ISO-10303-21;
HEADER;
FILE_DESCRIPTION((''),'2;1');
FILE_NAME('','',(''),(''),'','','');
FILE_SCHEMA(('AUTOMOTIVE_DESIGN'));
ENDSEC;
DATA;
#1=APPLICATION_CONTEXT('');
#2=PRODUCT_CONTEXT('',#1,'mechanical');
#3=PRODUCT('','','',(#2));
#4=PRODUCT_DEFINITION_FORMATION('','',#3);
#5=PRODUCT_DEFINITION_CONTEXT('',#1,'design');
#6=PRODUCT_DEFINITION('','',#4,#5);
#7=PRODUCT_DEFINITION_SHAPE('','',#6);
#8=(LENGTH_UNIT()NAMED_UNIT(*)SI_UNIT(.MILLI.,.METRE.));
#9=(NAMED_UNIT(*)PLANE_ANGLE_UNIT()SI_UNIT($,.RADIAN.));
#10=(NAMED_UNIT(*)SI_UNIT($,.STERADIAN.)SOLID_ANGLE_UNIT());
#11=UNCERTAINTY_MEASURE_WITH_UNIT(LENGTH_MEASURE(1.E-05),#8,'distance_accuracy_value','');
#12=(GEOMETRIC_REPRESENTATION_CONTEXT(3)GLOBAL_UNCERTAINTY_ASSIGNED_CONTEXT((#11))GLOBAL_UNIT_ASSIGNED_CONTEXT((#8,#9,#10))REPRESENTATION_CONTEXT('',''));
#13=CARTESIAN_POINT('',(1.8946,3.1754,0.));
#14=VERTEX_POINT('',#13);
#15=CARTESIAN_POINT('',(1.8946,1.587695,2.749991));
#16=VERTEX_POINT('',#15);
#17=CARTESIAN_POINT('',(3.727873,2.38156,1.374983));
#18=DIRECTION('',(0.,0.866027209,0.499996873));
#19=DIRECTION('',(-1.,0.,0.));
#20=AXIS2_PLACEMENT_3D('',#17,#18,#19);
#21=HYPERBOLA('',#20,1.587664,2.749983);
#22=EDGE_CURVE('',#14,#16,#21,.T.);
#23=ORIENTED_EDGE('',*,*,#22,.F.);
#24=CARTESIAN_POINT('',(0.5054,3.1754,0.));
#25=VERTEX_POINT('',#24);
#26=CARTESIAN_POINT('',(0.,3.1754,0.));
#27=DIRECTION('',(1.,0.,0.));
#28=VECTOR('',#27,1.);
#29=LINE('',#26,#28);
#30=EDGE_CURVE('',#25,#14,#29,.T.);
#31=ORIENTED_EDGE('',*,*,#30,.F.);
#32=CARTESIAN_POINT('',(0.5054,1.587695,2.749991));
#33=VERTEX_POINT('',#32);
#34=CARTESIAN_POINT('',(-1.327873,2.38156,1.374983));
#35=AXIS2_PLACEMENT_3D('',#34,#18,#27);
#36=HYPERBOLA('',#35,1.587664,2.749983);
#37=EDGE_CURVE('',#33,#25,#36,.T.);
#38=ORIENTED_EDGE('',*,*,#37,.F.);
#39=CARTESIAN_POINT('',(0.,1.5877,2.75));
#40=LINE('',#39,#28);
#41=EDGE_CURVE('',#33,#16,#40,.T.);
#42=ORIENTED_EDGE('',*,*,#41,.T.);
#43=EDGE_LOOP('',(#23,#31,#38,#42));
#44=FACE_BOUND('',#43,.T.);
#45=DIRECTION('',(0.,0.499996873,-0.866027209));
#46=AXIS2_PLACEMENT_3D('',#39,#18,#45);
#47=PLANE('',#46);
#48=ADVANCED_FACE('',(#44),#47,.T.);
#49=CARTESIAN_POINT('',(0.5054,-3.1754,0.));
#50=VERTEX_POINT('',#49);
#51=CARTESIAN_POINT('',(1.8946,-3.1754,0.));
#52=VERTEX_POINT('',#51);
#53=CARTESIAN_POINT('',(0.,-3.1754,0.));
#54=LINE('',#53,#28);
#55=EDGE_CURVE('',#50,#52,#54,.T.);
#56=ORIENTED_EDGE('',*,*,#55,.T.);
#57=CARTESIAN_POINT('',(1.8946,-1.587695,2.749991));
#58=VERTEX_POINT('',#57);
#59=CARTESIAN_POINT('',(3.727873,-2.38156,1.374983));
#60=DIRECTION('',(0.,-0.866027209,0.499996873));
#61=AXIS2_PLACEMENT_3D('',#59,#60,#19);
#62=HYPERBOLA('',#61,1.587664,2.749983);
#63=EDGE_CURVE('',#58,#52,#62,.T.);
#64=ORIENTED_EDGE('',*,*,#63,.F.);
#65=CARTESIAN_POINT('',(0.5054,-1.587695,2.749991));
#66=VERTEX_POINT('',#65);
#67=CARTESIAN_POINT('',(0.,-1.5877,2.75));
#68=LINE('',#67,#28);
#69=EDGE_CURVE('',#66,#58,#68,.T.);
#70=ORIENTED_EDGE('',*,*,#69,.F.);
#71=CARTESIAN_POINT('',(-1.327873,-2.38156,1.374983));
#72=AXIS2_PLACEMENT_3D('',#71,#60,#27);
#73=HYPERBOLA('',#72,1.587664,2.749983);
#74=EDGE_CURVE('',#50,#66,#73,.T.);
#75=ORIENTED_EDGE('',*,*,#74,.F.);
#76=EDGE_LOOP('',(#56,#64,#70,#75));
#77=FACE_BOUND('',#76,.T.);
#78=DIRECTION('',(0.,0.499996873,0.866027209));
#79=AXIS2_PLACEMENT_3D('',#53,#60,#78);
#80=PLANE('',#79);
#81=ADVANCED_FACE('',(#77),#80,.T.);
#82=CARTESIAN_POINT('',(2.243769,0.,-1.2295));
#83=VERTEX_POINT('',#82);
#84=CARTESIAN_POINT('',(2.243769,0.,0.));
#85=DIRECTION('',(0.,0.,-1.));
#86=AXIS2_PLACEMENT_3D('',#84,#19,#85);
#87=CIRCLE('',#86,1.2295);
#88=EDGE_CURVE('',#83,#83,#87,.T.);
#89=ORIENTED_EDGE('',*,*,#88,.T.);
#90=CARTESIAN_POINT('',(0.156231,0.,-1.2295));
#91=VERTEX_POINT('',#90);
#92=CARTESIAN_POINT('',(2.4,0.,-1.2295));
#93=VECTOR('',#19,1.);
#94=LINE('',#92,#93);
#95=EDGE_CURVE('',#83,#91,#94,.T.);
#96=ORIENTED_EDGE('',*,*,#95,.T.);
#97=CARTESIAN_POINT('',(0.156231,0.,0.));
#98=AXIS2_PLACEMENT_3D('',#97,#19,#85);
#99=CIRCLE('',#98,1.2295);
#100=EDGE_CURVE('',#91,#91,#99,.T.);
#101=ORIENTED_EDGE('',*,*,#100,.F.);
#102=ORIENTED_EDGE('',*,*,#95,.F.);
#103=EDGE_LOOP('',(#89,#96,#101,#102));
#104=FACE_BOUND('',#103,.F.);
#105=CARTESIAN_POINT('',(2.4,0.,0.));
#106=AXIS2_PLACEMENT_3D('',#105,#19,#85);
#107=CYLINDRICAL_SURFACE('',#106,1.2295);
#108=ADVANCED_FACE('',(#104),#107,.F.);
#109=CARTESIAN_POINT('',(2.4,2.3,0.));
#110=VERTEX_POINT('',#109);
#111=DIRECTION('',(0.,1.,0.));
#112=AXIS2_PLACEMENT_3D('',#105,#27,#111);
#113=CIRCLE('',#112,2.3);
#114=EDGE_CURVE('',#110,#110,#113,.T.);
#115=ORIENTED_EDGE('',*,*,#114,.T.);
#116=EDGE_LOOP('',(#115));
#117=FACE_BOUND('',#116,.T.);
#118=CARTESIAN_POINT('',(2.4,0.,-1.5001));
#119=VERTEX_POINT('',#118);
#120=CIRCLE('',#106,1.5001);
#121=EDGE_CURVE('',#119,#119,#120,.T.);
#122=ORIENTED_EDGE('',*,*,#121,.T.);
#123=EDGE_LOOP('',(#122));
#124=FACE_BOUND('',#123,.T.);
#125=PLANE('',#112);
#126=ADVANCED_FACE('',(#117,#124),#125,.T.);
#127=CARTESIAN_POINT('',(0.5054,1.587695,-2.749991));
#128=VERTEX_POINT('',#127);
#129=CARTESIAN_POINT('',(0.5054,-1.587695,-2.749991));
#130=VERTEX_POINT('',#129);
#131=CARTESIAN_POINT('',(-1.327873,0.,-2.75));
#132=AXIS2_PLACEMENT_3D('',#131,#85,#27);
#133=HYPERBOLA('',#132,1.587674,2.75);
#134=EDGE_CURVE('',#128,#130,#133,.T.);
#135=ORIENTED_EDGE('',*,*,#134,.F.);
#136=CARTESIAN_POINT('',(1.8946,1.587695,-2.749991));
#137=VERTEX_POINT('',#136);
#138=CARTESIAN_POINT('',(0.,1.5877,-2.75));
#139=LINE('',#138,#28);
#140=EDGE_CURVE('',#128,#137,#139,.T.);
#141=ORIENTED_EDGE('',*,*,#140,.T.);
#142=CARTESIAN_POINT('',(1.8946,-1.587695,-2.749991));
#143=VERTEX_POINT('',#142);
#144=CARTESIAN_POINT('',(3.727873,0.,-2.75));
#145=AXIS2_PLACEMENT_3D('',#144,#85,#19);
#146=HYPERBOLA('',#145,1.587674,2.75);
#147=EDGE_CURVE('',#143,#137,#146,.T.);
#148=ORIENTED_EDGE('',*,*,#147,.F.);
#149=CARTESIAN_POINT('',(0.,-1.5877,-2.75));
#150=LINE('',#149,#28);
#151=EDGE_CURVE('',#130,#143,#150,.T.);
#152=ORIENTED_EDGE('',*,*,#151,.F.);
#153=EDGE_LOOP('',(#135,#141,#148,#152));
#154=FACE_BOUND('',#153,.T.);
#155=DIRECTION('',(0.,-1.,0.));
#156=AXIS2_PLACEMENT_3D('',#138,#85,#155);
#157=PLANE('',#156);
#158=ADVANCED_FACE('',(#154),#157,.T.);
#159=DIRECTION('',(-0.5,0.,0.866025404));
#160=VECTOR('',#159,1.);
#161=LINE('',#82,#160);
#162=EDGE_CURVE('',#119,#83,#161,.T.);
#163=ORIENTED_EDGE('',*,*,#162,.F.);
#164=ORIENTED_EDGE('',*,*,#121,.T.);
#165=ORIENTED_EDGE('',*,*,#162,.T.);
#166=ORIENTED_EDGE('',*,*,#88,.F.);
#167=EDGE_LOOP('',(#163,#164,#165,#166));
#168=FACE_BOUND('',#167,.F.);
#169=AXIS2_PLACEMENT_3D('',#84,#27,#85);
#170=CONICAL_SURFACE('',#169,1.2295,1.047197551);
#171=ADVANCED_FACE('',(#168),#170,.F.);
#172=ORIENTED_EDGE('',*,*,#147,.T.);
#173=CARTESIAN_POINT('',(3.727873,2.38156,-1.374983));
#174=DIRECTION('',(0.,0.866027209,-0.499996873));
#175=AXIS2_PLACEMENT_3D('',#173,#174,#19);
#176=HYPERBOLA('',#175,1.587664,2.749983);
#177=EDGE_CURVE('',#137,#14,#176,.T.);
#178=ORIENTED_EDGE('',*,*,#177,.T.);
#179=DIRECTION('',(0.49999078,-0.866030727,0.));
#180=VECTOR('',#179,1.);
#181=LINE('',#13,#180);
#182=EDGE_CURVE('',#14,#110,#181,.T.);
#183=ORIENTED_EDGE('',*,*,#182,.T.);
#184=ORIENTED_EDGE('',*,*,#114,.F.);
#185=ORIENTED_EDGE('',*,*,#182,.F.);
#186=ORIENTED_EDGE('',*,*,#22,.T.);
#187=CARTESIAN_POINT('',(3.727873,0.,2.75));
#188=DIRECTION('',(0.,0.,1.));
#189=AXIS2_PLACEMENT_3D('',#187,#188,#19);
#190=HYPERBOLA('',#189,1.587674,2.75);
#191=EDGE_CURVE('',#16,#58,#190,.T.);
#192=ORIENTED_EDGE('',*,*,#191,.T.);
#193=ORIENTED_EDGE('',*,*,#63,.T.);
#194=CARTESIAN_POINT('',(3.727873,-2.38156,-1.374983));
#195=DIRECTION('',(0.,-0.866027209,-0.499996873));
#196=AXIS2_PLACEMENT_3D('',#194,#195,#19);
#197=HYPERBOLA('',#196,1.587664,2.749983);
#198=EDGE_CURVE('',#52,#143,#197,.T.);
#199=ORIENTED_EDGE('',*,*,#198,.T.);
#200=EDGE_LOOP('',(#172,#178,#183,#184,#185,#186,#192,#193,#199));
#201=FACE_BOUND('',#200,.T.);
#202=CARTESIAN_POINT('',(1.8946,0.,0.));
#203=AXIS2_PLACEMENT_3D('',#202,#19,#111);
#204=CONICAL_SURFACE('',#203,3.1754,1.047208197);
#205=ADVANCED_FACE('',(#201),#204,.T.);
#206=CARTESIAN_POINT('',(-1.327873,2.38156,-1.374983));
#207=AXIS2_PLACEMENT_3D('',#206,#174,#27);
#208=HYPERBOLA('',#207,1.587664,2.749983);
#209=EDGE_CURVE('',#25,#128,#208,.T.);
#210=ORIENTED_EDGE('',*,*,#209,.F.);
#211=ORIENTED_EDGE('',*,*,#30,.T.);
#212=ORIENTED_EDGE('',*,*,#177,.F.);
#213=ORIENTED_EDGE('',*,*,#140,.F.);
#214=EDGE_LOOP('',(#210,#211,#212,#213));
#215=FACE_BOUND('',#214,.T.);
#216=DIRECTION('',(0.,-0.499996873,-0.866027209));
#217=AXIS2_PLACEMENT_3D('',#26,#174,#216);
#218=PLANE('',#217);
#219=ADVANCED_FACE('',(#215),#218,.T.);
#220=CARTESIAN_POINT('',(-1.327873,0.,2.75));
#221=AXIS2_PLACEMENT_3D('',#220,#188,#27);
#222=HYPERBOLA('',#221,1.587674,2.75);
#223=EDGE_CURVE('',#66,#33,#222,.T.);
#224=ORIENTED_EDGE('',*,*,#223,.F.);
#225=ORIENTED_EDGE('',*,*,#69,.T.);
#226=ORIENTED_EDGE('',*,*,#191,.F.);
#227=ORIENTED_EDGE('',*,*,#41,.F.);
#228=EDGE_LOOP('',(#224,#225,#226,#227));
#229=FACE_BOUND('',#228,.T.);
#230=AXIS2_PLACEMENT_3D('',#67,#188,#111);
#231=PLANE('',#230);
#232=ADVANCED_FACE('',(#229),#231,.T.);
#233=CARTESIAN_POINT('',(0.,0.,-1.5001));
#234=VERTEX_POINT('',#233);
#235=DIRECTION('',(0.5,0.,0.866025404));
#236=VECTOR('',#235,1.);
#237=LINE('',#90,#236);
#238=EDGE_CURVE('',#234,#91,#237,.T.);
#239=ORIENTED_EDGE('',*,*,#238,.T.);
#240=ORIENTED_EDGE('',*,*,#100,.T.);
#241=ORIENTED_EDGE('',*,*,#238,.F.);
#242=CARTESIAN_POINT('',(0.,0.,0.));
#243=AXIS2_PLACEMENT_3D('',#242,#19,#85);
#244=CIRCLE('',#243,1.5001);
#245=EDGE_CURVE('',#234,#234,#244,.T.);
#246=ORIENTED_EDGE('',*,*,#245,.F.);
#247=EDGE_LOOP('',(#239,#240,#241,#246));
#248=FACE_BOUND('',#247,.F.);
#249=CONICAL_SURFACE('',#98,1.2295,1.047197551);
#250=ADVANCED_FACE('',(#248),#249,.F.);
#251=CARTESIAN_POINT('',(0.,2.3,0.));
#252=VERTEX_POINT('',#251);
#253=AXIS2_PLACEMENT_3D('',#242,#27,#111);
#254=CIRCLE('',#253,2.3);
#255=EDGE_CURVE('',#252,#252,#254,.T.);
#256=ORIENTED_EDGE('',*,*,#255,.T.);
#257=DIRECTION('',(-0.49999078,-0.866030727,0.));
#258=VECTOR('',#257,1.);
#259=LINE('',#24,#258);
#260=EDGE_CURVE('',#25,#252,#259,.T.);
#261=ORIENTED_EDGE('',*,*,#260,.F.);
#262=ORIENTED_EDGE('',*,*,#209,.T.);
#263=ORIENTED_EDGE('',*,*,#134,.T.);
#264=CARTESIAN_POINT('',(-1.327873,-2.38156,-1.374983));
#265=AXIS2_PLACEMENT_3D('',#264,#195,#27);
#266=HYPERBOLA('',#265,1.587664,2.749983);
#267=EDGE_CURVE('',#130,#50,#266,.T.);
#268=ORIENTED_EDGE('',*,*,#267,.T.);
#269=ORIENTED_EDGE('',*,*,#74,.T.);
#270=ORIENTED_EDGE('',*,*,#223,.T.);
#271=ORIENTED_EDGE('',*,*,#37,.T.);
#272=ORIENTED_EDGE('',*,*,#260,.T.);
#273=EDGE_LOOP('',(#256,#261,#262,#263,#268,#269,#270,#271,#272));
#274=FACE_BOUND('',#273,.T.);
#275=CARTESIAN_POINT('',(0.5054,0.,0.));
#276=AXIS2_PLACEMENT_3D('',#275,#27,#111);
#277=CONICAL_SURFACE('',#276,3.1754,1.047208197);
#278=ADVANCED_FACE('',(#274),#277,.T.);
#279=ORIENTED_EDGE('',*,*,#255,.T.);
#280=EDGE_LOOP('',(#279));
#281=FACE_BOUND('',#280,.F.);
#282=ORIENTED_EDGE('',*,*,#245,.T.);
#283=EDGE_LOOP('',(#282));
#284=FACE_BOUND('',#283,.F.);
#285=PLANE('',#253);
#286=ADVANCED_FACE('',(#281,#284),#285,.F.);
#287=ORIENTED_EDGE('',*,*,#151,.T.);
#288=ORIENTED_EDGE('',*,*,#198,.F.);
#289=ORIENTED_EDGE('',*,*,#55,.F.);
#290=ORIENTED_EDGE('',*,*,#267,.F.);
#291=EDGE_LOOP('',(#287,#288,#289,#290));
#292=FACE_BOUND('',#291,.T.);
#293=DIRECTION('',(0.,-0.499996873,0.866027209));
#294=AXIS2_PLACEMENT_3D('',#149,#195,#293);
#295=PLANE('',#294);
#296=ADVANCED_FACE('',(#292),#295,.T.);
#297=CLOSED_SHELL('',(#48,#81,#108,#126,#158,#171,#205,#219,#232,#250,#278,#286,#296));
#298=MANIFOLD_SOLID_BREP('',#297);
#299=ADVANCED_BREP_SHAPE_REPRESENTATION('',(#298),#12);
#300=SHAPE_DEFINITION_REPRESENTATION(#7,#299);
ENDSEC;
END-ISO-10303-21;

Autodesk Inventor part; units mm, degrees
ref_plane "YZ Plane" through (0, 0, 0) normal (1, 0, 0) x (0, 1, 0)
ref_plane "XZ Plane" through (0, 0, 0) normal (0, 1, 0) x (-1, 0, 0)
sketch "Sketch1" plane through (0, 0, 0) normal (1, 0, 0) x (0, 1, 0)
  line L0 (-3.1754, 0) -> (-1.5877, 2.75)
  line L1 (-1.5877, 2.75) -> (1.5877, 2.75)
  line L2 (1.5877, 2.75) -> (3.1754, 0)
  line L3 (3.1754, 0) -> (1.5877, -2.75)
  line L4 (1.5877, -2.75) -> (-1.5877, -2.75)
  line L5 (-1.5877, -2.75) -> (-3.1754, 0)
  point P0 (0, 0)
  point P1 (0, 0)
  dimension "d0" = 6.3509
extrude "Body" add sketch "Sketch1" along normal blind 2.4
sketch "Sketch2" plane through (0, 0, 0) normal (0, 0, 1) x (1, 0, 0)
  line L0 (0, 1.5877) -> (0, 3.1754) projected
  line L1 (0, 3.1754) -> (2.4, 3.1754) projected
  line L2 (2.4, 1.5877) -> (2.4, 3.1754) projected
  line L3 (-0.48, 0) -> (2.88, 0) projected
  line L4 (0.5054, 3.1754) -> (0, 2.3)
  line L5 (1.8946, 3.1754) -> (2.4, 2.3)
  dimension "d3" = 30
  dimension "d4" = 30
  dimension "d5" = 4.6
  dimension "d6" = 4.6
revolve "Chamfer1" cut sketch "Sketch2" angle 360 about axis through (-10, 0, 0) along (1, 0, 0)
sketch "Sketch3" plane through (2.4, 0, 0) normal (1, 0, 0) x (0, 0, -1)
  arc A0 (-0.625, -1.0825) -> (0.625, -1.0825) centre (0, 0) ccw projected
hole "Thread" at (2.4, 0, 0) direction (-1, 0, 0) diameter 2.459 end through all thread size "M3x0.5" class "6H" standard "ISO Metric profile"
chamfer "Chamfer2" distance 0.2706 angle 30 1 edges at (2.4, 0, 1.2295) measured on face at (2.4, 1.9179, -0.2329)
chamfer "Chamfer3" distance 0.2706 angle 30 1 edges at (0, 0, 1.2295) measured on face at (0, 1.9179, -0.2329)
ref_plane "Work Plane1" through (-6.3375, 0, 0) normal (0, -0.8660254, -0.5) x (1, 0, 0)
equation "\"d0\" = 1.1547 * SW"
equation "\"d1\" = KOH"
equation "\"d3\" = ANG1"
equation "\"d4\" = ANG2"
equation "\"d5\" = SW0"
equation "\"d6\" = SW01"
equation "\"d8\" = -0.5 * GD1 + 0.5 * NND"
equation "\"d40\" = -0.5 * GD1 + 0.5 * NND"
equation "\"d10\" = -0.5 * GD1 + 0.5 * NND"
equation "\"d41\" = -0.5 * GD1 + 0.5 * NND"
equation "\"ANG1\" = 30deg"
equation "\"ANG2\" = 30deg"
equation "\"NND\" = 3"
equation "\"KOH\" = 2.4"
equation "\"SW\" = 5.5"
equation "\"SW0\" = 4.6"
equation "\"SW01\" = SW0"
equation "\"GUL\" = 0.541266 * PTC"
equation "\"THREADDIA\" = 3"
equation "\"TOA\" = 30deg"
equation "\"PTC\" = 0.5"
equation "\"E0\" = 1.155 * SW"
equation "\"GAL\" = 0.541266 * PTC"
equation "\"GD1\" = 2.458734"
properties part number "ISO 4032 - M3" material "Stainless Steel, 440C"
